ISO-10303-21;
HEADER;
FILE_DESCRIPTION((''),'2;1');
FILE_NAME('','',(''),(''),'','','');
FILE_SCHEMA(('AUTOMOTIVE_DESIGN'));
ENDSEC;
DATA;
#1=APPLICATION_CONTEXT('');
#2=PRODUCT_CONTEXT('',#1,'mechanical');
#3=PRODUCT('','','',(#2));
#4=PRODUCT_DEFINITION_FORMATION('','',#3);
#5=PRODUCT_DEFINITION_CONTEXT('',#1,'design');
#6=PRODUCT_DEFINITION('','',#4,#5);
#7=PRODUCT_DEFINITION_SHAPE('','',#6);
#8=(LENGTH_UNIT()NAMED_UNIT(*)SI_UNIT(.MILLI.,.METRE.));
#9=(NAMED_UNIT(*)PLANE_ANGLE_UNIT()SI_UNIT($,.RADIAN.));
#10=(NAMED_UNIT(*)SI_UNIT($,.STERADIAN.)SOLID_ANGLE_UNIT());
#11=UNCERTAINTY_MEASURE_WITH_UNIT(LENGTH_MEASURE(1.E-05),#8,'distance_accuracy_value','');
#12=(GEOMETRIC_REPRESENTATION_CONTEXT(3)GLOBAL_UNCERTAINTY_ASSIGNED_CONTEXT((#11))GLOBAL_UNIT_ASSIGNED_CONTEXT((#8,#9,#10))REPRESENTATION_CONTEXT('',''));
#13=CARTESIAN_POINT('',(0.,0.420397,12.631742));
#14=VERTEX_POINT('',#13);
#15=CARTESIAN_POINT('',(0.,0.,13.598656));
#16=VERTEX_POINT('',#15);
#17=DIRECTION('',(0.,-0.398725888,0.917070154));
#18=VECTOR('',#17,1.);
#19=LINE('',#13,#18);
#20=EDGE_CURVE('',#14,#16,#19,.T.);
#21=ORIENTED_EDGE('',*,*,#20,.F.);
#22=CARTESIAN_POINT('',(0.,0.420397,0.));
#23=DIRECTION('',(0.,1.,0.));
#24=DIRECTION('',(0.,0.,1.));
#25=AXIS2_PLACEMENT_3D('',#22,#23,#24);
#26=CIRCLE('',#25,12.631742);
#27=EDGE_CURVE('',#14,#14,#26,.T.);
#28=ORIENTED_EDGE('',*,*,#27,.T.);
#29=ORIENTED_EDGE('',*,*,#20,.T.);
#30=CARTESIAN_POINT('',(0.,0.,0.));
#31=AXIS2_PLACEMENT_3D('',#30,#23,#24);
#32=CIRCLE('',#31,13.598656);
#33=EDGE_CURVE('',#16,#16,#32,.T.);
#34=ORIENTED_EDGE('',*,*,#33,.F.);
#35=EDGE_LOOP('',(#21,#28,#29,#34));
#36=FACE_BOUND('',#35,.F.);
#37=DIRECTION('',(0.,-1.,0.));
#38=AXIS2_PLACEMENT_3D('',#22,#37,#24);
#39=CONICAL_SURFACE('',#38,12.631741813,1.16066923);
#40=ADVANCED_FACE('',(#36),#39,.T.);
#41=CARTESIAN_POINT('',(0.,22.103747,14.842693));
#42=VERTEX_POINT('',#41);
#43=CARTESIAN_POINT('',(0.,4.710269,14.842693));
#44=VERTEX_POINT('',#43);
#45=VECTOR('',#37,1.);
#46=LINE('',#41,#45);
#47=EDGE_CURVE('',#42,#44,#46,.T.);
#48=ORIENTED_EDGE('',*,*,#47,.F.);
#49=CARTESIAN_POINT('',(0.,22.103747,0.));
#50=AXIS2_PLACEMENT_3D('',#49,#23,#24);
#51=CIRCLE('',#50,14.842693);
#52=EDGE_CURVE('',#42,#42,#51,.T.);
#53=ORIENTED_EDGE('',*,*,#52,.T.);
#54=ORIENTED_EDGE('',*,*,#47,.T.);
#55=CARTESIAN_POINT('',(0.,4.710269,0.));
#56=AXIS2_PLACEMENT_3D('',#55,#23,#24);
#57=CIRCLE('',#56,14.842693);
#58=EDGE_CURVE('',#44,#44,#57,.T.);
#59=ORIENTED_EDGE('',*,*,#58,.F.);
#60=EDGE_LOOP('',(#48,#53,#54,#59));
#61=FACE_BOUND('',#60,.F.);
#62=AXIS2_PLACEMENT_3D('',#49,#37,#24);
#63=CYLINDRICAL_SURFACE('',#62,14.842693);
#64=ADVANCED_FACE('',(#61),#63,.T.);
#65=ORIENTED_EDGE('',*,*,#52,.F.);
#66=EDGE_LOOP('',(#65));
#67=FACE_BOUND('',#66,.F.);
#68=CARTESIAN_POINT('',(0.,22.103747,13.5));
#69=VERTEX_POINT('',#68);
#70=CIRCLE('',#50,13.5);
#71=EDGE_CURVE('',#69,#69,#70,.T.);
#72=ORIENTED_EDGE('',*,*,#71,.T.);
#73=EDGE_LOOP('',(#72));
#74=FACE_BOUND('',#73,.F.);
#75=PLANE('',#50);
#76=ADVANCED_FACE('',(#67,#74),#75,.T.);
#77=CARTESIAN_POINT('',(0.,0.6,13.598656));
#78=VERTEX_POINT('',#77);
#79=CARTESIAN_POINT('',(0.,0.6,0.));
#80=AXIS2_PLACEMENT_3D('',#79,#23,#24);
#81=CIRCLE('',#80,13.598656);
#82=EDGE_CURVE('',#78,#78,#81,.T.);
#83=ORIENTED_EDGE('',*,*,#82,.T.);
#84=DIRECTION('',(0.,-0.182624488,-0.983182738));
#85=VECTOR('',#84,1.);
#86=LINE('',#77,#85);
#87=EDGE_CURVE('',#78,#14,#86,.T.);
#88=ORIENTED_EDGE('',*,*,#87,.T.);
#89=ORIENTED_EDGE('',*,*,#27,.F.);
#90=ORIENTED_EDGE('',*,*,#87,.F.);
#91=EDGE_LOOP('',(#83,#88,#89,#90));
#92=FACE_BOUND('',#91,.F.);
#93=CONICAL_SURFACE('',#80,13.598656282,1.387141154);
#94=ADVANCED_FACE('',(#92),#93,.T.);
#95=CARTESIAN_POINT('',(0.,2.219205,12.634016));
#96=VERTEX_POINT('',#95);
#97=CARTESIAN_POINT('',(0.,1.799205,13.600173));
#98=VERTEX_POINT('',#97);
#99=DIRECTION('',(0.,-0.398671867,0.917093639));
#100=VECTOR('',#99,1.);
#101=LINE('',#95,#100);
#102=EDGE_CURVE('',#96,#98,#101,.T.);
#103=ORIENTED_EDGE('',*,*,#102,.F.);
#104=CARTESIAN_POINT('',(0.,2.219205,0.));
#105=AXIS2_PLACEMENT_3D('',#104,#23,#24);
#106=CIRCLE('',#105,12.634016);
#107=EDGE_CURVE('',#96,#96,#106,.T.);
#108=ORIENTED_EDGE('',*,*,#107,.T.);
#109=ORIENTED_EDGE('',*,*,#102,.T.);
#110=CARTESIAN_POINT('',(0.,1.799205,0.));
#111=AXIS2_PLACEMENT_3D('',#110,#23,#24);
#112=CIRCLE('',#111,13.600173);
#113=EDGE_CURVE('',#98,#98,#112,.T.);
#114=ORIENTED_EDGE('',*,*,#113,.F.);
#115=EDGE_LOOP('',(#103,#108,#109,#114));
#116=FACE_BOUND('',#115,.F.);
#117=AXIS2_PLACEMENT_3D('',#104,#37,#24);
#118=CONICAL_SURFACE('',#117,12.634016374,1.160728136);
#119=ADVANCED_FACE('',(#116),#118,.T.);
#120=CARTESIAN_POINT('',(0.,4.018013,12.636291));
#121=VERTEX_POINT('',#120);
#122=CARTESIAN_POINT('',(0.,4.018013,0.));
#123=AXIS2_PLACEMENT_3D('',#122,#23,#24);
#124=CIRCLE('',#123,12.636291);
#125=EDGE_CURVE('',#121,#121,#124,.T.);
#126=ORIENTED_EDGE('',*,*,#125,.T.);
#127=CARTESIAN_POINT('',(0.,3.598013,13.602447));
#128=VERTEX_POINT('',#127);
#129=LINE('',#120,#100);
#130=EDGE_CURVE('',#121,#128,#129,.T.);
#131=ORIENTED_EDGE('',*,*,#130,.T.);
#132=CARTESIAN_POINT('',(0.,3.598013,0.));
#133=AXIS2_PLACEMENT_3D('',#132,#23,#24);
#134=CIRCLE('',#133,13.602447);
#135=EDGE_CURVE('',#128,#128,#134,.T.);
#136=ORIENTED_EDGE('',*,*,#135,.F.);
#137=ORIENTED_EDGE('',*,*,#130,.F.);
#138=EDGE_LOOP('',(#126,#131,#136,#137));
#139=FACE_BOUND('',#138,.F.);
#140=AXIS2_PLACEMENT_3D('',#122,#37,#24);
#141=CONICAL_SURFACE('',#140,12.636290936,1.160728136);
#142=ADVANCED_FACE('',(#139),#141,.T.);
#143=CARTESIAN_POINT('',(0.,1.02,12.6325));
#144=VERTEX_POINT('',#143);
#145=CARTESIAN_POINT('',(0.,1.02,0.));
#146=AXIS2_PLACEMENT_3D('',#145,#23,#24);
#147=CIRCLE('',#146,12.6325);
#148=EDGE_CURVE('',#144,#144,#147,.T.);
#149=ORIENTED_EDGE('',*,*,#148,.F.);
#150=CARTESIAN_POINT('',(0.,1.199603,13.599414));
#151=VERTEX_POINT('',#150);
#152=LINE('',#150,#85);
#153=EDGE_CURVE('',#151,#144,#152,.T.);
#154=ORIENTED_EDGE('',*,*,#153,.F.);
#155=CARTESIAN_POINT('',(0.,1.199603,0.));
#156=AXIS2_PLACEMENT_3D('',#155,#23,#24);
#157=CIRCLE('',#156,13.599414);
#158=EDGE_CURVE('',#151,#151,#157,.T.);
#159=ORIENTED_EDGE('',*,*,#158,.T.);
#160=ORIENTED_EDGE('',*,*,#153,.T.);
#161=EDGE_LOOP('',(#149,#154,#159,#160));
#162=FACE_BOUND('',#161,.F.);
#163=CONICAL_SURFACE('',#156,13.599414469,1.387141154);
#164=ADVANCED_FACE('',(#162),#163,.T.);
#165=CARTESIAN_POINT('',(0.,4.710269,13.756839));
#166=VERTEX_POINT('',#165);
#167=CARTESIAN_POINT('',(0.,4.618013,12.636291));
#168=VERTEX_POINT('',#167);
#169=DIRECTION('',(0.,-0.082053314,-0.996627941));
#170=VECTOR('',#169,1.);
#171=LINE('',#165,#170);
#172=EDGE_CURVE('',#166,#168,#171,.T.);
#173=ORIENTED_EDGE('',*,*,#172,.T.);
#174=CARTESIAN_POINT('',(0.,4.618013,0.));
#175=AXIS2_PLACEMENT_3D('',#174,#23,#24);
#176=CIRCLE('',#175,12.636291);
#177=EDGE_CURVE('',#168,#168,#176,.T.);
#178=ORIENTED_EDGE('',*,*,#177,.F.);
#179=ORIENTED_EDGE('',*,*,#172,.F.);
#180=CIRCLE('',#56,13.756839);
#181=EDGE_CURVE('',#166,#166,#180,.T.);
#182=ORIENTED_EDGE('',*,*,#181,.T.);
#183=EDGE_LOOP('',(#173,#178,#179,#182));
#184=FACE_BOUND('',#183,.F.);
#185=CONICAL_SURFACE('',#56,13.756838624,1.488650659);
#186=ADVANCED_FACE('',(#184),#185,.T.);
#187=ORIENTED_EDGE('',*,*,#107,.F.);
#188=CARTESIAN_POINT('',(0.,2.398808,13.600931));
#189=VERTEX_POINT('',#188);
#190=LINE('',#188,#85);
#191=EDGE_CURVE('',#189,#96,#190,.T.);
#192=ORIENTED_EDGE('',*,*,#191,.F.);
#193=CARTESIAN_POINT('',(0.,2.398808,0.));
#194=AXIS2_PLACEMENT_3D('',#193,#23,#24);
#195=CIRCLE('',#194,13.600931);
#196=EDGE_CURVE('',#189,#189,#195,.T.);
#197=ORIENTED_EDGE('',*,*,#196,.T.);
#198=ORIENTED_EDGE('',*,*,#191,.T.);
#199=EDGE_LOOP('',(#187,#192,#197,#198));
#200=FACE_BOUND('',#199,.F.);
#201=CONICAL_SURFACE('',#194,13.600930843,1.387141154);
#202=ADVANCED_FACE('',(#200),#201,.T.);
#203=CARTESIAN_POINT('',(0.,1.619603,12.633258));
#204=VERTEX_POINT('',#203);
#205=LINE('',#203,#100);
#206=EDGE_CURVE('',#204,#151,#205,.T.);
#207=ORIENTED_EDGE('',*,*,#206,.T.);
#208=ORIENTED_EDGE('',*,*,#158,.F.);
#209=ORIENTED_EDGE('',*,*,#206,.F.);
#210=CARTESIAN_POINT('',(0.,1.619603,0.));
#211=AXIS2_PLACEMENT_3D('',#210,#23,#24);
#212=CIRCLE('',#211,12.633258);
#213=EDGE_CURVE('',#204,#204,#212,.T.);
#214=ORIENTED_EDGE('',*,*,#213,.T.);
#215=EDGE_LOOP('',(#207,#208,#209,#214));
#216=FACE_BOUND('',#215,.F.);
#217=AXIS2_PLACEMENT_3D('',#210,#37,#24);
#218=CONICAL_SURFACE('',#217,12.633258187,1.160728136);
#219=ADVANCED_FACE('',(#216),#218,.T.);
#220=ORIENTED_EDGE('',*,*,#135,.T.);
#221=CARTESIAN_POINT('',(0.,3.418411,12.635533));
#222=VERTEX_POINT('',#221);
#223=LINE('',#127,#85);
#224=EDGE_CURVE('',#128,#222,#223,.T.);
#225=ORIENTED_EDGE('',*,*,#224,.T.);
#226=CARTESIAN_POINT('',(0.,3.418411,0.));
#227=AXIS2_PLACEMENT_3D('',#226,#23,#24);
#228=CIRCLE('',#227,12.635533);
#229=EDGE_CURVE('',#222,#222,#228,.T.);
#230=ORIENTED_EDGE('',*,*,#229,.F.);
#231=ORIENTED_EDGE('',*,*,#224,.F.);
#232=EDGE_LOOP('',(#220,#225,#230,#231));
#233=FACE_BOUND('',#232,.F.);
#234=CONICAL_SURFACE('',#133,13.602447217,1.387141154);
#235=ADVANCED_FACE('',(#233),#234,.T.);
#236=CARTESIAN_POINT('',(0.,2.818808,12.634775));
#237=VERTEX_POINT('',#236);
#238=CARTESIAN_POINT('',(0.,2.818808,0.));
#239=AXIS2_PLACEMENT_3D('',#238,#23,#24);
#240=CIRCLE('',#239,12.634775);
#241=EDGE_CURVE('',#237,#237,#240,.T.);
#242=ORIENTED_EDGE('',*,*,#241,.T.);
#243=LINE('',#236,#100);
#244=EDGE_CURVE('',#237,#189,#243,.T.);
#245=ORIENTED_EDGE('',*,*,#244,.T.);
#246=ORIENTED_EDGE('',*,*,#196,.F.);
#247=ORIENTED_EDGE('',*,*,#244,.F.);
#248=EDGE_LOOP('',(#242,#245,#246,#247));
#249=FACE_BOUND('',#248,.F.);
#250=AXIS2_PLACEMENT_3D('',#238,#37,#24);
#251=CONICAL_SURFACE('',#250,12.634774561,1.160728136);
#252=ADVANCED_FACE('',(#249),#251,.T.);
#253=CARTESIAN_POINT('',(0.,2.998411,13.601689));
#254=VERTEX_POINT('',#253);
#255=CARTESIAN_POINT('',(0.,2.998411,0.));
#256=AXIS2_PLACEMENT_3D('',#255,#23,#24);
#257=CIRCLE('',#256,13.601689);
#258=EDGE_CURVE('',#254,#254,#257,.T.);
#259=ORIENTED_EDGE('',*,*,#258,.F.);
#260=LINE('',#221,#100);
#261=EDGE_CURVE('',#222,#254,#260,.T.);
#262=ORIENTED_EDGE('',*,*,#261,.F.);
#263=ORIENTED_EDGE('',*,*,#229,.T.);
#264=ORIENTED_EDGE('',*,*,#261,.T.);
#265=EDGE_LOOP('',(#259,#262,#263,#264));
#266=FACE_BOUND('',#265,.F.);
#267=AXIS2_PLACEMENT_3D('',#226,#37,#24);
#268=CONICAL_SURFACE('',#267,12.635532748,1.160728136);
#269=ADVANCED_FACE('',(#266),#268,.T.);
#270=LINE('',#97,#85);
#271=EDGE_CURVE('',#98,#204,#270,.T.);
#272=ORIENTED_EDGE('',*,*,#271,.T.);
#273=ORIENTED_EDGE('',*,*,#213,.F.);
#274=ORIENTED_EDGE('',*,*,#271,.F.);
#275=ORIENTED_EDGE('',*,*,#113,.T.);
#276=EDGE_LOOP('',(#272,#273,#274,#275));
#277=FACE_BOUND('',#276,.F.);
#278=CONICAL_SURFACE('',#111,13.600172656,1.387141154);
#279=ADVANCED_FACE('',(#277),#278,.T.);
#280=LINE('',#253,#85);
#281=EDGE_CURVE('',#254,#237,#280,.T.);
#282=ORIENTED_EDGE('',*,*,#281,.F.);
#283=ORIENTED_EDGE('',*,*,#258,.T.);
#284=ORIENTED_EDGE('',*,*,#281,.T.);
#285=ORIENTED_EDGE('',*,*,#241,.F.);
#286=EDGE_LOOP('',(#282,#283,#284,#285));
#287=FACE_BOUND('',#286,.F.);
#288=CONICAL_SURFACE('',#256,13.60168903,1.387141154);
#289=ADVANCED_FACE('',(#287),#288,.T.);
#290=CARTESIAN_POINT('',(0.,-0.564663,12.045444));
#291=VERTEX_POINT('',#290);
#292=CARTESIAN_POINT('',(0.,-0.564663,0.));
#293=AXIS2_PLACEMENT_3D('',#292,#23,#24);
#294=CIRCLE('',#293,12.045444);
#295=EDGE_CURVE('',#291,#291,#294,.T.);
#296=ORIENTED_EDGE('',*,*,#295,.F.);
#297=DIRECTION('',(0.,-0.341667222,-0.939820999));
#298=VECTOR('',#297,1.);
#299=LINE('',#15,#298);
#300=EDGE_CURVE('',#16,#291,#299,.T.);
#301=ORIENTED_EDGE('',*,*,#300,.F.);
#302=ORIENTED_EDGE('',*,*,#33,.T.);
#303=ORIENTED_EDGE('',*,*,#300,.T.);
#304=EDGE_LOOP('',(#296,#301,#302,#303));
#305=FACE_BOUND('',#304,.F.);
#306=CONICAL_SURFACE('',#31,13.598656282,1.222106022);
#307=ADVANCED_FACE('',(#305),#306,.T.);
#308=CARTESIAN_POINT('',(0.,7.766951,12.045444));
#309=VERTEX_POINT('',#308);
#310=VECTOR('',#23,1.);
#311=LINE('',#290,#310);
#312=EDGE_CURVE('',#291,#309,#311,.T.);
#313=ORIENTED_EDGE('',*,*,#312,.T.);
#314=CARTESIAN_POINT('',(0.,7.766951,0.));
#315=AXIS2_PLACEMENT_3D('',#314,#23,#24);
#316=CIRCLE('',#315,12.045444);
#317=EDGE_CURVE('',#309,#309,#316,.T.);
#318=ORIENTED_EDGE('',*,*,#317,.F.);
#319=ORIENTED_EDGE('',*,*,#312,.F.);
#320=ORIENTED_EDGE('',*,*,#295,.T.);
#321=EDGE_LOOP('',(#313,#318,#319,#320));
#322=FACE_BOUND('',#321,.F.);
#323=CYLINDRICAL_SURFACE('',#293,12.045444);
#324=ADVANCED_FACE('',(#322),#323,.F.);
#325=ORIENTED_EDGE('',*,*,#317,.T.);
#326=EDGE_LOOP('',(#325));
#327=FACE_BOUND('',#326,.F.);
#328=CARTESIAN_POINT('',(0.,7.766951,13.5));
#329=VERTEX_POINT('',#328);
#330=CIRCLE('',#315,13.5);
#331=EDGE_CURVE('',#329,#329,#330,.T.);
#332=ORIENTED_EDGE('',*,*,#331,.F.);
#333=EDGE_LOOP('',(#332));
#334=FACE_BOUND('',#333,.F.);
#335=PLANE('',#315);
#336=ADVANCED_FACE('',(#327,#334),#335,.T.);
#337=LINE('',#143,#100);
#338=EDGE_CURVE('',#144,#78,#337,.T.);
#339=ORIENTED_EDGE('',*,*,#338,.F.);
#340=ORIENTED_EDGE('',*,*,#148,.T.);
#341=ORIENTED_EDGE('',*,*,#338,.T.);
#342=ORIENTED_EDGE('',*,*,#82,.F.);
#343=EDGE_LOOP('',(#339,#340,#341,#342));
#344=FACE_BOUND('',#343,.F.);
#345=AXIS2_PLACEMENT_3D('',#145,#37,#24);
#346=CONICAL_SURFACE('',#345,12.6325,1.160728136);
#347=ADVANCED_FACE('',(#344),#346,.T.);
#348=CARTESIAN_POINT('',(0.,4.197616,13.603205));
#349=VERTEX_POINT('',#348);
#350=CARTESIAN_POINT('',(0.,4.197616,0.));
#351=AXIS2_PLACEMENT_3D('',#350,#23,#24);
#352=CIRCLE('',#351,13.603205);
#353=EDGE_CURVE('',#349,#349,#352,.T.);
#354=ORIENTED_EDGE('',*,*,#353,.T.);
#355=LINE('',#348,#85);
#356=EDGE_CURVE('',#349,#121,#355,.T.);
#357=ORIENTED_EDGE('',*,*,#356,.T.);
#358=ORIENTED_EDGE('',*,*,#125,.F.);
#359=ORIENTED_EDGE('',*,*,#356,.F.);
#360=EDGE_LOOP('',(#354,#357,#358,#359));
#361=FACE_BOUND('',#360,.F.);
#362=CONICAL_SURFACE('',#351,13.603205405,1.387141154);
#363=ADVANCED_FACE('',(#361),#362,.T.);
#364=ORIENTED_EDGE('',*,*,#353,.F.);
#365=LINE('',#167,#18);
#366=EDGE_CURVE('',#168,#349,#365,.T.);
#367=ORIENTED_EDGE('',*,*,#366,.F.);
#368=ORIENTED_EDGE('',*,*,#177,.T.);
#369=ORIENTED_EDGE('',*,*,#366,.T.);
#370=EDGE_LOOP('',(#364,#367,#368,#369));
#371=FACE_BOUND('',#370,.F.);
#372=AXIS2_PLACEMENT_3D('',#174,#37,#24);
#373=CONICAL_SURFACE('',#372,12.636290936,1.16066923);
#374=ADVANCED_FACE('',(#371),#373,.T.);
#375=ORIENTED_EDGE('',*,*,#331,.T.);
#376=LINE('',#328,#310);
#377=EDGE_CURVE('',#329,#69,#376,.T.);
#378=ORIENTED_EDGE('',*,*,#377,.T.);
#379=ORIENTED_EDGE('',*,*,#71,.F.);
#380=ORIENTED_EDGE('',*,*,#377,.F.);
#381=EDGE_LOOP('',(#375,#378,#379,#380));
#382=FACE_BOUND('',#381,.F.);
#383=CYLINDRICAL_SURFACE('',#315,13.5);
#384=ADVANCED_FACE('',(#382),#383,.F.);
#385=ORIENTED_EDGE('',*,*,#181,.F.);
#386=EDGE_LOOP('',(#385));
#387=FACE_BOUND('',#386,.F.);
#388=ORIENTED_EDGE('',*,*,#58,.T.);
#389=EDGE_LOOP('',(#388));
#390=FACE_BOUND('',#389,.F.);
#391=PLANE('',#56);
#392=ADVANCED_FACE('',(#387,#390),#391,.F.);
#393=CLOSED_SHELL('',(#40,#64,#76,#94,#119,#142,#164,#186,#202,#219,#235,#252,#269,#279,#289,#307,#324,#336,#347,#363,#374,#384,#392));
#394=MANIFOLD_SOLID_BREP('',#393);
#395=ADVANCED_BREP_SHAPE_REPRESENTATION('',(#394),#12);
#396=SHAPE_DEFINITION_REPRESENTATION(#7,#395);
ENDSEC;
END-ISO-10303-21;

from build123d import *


# Not quite as in the source:
# - ends of sketch curves that miss each other by under 0.0002 mm in the source are joined


with BuildPart() as f1:
    # F0 (on Right) → F1 (revolve)
    with BuildSketch(Plane.YZ):
        Polygon((0, 13.5986562818), (-0.5646626814, 12.0454436497), (7.7669508635, 12.0454436497), (7.7669508635, 13.5), (22.1037470661, 13.5), (22.1037470661, 14.8426934129), (4.7102691696, 14.8426934129), (4.7102691696, 13.7568386238), (4.6180134269, 12.6362909356), (4.1976161123, 13.6032054045), (4.0180134269, 12.6362909356), (3.5980134269, 13.6024472174), (3.4184107415, 12.6355327485), (2.9984107415, 13.6016890303), (2.8188080562, 12.6347745614), (2.3988080562, 13.6009308432), (2.2192053708, 12.6340163742), (1.7992053708, 13.6001726561), (1.6196026854, 12.6332581871), (1.1996026854, 13.5994144689), (1.02, 12.6325), (0.6, 13.5986562818), (0.4203973146, 12.6317418129), align=None)
    revolve(axis=Axis((0, 14.1517902564, 0), (0, 1, 0)))


solid = f1.part
